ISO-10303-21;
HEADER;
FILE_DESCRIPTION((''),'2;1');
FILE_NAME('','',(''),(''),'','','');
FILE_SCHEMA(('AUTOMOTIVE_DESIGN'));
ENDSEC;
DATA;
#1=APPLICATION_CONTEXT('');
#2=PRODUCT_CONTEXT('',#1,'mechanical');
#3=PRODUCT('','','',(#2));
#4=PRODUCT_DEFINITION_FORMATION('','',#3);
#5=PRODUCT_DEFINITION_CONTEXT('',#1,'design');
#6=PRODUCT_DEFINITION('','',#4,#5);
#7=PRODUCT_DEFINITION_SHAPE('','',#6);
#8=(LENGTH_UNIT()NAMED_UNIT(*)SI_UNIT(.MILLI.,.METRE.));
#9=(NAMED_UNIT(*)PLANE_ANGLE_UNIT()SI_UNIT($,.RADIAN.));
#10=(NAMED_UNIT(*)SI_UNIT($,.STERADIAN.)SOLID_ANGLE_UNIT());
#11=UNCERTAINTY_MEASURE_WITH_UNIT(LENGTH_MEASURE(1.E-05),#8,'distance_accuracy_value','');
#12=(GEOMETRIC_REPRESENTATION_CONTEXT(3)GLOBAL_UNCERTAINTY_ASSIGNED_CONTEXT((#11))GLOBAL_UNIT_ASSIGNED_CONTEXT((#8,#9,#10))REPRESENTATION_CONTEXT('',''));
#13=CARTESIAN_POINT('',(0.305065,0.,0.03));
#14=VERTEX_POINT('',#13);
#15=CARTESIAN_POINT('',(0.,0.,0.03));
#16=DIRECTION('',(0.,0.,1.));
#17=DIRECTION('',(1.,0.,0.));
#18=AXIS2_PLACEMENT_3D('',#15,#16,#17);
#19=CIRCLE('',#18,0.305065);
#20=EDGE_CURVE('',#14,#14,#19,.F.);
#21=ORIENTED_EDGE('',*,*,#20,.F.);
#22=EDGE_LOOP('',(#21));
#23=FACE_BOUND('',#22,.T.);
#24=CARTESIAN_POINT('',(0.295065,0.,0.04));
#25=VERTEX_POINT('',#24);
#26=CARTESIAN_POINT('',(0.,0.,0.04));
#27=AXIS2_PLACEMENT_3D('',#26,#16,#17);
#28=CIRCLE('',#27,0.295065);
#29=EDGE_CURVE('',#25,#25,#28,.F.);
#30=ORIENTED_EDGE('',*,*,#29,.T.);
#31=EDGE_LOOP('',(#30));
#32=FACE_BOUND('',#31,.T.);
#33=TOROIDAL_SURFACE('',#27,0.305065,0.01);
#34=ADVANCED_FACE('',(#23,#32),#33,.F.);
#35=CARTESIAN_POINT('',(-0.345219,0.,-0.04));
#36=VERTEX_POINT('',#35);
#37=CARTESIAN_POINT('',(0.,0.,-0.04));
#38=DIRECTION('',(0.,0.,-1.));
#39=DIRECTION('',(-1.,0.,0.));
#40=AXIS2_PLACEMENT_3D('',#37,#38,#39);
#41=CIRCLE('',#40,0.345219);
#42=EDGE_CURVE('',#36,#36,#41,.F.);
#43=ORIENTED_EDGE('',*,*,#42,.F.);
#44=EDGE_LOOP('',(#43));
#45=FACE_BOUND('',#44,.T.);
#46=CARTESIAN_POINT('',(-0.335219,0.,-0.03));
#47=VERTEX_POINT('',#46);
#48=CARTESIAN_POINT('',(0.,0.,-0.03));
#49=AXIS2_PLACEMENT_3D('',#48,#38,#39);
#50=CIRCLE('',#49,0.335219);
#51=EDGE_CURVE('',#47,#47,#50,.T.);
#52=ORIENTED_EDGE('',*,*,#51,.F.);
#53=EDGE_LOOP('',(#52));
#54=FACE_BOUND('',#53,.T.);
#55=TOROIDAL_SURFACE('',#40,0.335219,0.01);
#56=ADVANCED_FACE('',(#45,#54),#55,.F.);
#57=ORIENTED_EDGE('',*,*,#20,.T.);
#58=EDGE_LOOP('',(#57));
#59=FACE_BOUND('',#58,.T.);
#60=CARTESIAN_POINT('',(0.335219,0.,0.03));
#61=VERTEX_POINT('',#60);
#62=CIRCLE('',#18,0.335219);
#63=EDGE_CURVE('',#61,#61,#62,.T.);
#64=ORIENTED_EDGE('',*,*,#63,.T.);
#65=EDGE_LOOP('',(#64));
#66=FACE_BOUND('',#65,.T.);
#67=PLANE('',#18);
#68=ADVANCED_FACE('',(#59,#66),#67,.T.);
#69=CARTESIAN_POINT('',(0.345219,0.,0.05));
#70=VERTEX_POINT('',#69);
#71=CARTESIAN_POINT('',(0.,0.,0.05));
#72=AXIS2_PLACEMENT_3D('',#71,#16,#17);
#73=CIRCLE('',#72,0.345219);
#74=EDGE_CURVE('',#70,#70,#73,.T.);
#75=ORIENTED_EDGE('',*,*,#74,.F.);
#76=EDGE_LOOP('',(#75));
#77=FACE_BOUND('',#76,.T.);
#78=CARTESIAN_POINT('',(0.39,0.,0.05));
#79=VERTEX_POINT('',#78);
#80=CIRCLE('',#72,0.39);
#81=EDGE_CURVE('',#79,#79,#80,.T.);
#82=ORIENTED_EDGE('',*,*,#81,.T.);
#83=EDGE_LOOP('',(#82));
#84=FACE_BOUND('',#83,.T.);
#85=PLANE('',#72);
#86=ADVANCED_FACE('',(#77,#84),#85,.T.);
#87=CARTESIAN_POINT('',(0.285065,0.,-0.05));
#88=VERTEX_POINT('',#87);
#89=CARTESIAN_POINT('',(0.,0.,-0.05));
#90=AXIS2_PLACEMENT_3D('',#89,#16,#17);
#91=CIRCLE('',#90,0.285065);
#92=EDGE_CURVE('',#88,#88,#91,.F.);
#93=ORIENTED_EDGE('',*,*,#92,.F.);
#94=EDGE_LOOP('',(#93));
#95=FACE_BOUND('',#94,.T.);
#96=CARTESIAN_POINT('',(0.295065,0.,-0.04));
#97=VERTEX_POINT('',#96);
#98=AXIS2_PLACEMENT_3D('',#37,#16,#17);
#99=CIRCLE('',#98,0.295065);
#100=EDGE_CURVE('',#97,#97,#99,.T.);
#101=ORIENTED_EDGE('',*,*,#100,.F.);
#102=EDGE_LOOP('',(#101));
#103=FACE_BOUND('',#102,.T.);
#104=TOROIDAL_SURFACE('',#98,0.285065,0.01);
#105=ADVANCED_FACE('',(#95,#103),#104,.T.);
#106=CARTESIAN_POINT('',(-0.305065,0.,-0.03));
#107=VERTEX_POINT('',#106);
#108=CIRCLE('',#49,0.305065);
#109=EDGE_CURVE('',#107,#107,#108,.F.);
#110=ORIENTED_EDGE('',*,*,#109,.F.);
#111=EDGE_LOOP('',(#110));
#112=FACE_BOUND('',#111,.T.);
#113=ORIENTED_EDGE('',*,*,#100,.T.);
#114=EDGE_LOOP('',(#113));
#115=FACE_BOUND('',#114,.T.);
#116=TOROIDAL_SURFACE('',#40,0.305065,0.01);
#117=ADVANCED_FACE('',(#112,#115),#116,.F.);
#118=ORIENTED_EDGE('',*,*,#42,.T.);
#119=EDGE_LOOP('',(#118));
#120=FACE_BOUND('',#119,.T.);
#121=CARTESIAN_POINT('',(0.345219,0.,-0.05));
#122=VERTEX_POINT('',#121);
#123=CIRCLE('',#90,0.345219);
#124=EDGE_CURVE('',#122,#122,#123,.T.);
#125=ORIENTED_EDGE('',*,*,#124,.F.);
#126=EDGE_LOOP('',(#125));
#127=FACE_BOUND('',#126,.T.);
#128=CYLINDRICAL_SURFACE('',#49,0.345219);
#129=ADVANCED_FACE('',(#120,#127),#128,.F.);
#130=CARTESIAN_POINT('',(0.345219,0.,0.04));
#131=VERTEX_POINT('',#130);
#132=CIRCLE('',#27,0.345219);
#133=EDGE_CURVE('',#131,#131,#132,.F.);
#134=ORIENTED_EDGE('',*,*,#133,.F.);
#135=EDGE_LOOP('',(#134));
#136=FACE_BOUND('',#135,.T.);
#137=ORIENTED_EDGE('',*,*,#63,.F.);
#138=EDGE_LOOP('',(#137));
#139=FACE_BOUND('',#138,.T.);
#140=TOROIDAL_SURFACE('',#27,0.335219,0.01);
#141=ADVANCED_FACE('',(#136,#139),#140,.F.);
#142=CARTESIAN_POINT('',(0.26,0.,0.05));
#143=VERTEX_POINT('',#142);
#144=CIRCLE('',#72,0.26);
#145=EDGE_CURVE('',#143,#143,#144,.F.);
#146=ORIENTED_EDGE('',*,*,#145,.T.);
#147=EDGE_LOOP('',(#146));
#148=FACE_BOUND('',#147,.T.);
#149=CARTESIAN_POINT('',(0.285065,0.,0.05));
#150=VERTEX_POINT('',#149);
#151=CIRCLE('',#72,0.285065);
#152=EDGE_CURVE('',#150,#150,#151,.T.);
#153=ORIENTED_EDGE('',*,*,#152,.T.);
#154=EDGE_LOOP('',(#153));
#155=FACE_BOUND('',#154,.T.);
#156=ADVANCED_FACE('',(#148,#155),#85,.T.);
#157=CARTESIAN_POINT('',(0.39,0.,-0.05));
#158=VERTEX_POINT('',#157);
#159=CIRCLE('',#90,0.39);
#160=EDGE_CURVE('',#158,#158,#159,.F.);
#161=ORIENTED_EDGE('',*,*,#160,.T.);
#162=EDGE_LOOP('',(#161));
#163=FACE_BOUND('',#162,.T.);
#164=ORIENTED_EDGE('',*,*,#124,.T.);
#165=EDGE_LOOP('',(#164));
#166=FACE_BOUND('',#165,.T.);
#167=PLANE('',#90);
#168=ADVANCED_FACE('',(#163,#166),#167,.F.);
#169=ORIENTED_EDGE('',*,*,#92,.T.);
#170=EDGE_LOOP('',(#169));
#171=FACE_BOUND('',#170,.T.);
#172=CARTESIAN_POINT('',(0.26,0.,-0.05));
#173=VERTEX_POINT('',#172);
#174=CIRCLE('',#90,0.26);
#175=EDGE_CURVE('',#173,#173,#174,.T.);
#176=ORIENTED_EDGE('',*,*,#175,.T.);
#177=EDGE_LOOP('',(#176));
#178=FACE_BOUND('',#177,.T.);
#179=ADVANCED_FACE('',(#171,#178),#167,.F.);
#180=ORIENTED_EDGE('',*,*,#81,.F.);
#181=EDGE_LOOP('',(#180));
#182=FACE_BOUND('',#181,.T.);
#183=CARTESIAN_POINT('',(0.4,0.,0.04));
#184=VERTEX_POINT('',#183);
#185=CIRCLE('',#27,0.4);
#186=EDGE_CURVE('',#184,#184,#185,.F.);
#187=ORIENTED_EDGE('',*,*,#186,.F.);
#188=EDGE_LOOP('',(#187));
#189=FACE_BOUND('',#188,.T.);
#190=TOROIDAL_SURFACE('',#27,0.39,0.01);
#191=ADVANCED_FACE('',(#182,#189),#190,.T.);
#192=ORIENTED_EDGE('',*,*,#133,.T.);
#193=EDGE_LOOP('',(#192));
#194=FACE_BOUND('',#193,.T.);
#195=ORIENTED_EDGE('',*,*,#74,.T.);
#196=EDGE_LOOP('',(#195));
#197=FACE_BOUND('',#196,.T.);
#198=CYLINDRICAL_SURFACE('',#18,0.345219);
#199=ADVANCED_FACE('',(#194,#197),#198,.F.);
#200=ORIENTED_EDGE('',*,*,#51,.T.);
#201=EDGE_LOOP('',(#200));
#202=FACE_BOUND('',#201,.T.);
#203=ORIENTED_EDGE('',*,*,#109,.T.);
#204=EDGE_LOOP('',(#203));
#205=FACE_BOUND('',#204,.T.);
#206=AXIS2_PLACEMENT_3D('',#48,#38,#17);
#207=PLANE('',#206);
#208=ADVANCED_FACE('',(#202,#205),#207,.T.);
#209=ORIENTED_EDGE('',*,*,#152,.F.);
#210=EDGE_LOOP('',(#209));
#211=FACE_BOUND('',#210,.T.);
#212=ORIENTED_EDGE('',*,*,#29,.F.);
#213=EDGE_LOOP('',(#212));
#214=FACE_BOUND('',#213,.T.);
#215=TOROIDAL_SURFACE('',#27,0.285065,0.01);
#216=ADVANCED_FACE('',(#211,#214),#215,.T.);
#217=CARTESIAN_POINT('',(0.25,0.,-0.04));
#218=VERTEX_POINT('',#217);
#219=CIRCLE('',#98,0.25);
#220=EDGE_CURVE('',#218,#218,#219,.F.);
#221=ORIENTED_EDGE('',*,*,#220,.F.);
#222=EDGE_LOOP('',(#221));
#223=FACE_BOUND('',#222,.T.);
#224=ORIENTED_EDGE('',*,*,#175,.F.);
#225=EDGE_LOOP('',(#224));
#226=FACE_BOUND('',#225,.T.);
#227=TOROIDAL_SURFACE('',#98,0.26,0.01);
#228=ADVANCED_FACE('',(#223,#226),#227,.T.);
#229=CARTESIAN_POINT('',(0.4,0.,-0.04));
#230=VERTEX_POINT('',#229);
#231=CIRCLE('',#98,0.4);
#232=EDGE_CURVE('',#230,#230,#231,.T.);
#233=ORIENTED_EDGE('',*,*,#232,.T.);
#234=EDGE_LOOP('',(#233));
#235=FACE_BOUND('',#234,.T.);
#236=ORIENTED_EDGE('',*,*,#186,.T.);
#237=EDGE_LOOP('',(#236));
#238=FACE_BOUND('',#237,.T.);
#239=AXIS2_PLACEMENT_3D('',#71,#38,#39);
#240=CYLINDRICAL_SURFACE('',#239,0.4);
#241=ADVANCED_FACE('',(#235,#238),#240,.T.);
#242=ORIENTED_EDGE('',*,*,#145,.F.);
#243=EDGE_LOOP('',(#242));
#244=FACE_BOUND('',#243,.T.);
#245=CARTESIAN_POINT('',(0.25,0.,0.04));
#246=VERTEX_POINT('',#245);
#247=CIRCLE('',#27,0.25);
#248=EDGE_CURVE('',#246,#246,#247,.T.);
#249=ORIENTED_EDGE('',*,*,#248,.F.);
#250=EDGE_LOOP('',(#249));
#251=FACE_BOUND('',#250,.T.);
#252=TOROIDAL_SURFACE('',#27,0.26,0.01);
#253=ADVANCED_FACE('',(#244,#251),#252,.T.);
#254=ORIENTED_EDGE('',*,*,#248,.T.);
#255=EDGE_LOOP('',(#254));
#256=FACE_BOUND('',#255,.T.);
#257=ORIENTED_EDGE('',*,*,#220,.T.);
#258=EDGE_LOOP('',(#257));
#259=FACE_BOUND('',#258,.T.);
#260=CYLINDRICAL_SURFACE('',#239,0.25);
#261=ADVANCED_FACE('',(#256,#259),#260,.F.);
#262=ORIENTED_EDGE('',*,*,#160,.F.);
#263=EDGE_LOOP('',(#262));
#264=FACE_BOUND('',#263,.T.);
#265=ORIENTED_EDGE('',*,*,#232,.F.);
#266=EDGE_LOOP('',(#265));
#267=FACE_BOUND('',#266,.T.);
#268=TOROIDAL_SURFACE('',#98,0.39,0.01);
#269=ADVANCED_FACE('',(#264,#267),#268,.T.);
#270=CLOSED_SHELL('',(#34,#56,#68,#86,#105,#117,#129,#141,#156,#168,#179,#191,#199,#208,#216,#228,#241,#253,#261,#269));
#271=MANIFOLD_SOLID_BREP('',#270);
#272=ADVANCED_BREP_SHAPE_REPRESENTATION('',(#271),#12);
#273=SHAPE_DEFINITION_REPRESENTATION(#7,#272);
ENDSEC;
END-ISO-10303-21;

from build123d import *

# Parameters (mm, degrees)
SKETCH1_R           = 0.4
SKETCH1_R_2         = 0.25
BOSS_EXTRUDE1_DEPTH = 0.05
SKETCH2_R           = 0.345218632
SKETCH2_R_2         = 0.29506517
CUT_EXTRUDE1_DEPTH  = 0.02
FILLET1_R           = 0.01
FILLET2_R           = 0.01


with BuildPart() as part:
    # Sketch1 → Boss-Extrude1 (new, symmetric)
    with BuildSketch(Plane.XY):
        Circle(SKETCH1_R)
        Circle(SKETCH1_R_2, mode=Mode.SUBTRACT)
    extrude(amount=BOSS_EXTRUDE1_DEPTH, both=True)

    # Sketch2 → Cut-Extrude1 (cut)
    with BuildSketch(Plane.XY.offset(0.05)):
        Circle(SKETCH2_R)
        Circle(SKETCH2_R_2, mode=Mode.SUBTRACT)
    cut_extrude1 = extrude(amount=-CUT_EXTRUDE1_DEPTH, mode=Mode.SUBTRACT)

    # Mirror1: Cut-Extrude1 across plane
    add(cut_extrude1.mirror(Plane.XY), mode=Mode.SUBTRACT)

    # Fillet1
    fillet1_edges = [part.edges().sort_by_distance(p)[0] for p in [
        (-0.345218632, 0, 0.03),
        (-0.29506517, 0, 0.03),
        (-0.29506517, 0, 0.05),
        (-0.345218632, 0, -0.03),
        (-0.4, 0, -0.05),
        (-0.29506517, 0, -0.05),
        (-0.29506517, 0, -0.03),
        (-0.4, 0, 0.05),
    ]]
    fillet(fillet1_edges, radius=FILLET1_R - 0.0001)  # a hair under: the kernel refuses the full size

    # Fillet2
    fillet2_edges = [part.edges().sort_by_distance(p)[0] for p in [
        (-0.25, 0, -0.05),
        (-0.25, 0, 0.05),
    ]]
    fillet(fillet2_edges, radius=FILLET2_R)


solid = part.part
